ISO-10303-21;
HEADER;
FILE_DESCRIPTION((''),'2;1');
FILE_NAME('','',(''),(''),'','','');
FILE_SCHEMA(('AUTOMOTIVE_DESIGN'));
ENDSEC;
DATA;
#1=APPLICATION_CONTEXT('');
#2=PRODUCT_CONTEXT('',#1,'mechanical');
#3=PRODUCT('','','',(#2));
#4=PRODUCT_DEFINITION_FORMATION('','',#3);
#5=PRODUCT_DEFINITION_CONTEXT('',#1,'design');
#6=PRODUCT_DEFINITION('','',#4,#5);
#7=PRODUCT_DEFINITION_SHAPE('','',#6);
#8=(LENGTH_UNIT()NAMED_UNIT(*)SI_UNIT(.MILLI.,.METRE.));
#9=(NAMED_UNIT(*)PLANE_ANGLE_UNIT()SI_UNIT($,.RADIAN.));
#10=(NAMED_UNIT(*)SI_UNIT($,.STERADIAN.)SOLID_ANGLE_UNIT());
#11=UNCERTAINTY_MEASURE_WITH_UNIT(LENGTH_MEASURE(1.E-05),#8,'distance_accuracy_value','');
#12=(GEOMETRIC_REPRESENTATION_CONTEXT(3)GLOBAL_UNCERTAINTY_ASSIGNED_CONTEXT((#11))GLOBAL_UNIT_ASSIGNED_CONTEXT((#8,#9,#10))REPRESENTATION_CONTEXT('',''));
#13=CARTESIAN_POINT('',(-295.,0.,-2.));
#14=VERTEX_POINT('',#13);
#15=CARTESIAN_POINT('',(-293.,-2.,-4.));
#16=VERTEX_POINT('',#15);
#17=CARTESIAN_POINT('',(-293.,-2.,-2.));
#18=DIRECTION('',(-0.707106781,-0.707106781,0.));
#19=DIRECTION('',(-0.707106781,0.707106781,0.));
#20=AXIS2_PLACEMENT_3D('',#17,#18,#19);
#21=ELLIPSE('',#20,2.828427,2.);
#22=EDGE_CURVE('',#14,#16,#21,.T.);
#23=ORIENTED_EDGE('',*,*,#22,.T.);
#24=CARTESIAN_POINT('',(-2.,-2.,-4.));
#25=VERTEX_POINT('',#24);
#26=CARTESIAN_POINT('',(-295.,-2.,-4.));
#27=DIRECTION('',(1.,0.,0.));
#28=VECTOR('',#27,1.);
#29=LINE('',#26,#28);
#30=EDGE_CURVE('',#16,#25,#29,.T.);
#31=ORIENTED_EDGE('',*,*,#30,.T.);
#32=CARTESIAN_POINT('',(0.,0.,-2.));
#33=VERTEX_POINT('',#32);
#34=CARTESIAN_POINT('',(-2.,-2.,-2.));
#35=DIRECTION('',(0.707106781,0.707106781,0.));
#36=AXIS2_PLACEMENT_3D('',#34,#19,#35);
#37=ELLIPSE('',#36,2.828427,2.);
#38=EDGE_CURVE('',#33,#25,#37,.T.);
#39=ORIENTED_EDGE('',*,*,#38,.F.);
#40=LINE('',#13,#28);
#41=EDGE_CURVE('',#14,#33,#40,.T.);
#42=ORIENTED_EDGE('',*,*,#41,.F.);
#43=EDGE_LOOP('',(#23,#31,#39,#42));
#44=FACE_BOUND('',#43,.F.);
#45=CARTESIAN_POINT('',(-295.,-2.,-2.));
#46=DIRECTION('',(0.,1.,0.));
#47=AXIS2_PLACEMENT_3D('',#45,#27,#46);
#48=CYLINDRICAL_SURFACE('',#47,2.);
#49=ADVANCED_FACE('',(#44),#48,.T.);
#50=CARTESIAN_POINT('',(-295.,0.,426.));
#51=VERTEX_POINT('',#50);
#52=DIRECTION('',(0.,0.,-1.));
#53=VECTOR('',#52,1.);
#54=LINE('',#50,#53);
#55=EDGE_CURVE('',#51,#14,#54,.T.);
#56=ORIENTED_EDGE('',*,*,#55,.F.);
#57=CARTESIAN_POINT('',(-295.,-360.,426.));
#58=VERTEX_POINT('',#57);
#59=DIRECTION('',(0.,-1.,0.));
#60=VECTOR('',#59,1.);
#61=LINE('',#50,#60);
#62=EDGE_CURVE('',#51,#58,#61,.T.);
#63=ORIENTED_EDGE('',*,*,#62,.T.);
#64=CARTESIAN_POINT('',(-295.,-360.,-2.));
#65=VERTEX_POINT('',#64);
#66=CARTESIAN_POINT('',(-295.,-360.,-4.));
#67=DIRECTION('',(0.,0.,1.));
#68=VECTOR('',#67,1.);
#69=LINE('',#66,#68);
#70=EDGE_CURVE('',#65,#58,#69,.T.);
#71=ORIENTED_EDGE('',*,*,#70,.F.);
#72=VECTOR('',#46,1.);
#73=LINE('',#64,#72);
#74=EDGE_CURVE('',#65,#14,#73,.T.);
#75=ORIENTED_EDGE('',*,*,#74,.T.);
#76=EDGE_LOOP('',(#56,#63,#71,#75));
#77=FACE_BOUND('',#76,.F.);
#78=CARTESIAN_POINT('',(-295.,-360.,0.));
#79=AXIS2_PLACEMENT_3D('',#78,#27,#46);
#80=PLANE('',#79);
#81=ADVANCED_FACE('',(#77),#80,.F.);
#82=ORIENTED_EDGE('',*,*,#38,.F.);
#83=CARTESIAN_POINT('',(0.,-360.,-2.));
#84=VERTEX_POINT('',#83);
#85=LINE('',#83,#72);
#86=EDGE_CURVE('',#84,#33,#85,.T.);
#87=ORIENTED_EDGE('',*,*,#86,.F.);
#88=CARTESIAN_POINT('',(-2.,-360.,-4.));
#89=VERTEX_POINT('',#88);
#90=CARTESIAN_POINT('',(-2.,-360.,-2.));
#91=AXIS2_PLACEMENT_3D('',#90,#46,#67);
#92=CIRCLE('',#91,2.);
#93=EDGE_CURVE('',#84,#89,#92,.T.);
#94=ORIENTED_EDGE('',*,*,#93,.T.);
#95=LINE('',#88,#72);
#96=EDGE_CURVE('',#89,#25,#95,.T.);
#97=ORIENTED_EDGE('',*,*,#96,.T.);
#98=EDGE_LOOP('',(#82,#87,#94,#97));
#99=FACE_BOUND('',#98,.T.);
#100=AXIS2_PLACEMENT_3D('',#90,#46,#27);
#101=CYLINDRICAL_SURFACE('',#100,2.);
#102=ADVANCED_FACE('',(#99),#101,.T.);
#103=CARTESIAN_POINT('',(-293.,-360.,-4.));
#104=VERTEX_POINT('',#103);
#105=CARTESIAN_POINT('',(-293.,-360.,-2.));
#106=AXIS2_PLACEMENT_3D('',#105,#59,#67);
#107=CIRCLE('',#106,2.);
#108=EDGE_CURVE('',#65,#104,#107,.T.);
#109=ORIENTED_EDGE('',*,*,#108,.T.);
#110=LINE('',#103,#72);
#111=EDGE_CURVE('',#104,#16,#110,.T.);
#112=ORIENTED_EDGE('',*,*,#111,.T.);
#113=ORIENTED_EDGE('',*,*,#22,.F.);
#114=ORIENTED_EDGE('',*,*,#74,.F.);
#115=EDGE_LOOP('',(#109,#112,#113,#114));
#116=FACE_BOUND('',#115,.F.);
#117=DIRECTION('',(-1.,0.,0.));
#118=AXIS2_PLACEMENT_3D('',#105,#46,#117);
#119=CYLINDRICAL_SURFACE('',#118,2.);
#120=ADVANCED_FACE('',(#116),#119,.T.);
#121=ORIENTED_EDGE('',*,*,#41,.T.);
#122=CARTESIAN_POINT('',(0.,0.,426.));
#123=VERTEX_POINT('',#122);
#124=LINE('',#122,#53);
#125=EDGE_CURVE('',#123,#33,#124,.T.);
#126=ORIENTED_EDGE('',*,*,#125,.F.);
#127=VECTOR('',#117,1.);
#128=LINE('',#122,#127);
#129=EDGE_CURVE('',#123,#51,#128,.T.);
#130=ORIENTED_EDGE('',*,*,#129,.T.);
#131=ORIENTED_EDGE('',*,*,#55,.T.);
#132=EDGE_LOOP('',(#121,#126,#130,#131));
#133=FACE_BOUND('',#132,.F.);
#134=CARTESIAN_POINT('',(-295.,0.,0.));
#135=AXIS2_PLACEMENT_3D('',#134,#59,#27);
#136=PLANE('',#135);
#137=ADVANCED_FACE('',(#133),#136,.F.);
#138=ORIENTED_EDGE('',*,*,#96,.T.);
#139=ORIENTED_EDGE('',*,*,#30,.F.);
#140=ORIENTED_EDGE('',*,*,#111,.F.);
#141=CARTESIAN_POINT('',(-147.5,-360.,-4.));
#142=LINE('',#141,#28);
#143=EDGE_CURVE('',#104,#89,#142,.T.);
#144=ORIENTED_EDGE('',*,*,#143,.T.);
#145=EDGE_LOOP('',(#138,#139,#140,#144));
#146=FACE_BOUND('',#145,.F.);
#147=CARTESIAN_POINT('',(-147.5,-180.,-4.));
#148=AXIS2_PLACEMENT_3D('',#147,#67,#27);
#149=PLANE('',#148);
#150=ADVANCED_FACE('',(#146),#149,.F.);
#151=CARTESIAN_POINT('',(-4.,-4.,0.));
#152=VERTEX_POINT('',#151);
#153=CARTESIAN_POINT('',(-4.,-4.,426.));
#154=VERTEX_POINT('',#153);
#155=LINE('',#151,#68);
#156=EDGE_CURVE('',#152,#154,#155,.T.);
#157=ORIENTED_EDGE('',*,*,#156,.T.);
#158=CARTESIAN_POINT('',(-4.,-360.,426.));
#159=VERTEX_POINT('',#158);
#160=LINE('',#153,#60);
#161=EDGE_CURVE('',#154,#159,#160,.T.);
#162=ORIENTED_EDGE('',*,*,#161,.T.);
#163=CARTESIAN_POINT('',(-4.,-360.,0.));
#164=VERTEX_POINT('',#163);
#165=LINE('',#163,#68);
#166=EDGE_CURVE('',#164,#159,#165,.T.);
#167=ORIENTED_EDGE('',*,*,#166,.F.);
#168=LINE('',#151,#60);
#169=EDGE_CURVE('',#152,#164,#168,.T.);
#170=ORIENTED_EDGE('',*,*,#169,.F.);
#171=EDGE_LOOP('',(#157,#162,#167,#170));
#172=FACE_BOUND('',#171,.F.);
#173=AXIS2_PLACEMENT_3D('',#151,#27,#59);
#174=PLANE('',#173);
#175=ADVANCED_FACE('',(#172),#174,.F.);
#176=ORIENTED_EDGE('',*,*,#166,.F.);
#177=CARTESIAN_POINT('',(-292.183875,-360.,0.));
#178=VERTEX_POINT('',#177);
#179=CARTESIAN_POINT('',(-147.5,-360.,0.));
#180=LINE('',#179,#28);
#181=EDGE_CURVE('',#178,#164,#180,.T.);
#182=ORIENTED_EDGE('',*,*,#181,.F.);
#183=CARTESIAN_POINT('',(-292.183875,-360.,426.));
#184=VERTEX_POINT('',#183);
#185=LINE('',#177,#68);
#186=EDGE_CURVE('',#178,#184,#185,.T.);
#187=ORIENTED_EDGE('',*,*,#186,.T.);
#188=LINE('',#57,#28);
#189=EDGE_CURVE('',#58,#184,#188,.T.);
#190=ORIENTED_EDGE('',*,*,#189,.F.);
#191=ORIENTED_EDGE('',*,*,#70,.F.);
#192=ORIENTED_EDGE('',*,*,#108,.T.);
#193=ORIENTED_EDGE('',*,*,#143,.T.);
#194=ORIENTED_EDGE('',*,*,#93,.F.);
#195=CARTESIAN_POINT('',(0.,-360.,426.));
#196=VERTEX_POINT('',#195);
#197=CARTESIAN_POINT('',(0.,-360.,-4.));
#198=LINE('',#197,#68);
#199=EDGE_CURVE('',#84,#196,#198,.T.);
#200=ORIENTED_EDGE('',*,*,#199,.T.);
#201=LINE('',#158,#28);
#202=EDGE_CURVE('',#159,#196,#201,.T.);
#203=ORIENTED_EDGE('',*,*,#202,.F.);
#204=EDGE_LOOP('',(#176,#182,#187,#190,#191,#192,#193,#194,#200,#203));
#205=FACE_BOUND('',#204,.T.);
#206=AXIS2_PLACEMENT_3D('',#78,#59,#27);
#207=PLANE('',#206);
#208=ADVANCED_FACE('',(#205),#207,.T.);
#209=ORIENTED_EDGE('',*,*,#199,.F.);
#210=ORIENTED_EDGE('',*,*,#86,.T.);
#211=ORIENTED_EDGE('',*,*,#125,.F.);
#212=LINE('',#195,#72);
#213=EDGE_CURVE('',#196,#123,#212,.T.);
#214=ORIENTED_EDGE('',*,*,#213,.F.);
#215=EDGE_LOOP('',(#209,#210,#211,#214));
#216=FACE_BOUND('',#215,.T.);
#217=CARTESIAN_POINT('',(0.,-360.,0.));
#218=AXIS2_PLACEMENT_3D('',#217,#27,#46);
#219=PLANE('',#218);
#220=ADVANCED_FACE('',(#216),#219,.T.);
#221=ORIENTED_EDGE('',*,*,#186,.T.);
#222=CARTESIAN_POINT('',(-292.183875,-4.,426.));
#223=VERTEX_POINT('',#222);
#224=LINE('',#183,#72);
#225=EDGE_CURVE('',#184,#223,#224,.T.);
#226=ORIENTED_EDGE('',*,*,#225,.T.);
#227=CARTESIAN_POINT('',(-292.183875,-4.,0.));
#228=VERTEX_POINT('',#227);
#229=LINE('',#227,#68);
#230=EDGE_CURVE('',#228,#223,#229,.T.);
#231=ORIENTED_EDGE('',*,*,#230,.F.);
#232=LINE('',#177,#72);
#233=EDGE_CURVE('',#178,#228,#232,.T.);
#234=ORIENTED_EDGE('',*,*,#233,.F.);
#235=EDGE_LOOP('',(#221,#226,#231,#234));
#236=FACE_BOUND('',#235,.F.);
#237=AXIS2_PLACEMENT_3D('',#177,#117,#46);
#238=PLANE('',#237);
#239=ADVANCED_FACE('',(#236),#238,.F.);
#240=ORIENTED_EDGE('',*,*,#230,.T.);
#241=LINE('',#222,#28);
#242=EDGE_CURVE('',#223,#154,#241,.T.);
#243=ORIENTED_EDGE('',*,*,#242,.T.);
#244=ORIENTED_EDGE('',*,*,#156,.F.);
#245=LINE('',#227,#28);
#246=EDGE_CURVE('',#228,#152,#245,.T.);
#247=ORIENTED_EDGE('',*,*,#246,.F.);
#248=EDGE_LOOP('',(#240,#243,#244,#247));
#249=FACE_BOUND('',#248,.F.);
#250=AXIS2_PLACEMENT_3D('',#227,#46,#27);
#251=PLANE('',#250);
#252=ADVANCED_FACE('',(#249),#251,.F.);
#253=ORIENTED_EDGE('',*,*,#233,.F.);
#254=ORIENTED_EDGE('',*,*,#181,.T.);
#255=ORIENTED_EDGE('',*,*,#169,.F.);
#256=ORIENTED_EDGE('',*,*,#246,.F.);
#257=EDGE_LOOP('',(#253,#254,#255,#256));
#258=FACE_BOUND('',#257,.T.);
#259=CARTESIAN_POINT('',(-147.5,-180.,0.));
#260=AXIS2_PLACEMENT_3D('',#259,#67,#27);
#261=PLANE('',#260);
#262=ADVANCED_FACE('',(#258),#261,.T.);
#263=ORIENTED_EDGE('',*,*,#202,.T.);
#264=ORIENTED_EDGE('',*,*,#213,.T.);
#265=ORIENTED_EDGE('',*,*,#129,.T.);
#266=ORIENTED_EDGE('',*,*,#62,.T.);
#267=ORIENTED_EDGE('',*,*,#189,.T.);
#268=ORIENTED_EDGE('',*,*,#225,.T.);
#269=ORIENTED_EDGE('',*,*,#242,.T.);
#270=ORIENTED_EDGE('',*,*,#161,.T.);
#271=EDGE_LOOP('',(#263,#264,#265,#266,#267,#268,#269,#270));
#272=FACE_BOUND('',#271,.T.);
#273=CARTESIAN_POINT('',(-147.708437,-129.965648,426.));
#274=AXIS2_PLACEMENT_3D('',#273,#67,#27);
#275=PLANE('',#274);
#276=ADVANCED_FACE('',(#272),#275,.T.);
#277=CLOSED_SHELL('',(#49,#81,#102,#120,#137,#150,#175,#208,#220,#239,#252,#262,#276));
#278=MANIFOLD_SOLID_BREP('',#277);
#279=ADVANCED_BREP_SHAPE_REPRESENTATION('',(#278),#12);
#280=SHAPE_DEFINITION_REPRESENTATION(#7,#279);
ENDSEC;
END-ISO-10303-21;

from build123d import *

# Parameters (mm, degrees)
F1_DEPTH = 426
F2_W     = 295
F2_H     = 360
F3_DEPTH = 4
F4_R     = 2


# Not quite as in the source:
# - a feature names something its author has since deleted; it is built from what else it names


with BuildPart() as f1:
    # F0 (on Top) → F1 (new body)
    with BuildSketch(Plane.XY):
        Polygon((-4, -360), (0, -360), (0, 0), (-295, 0), (-295, -360), (-292.1838745495, -360), (-292.1838745495, -4), (-4, -4), align=None)
    extrude(amount=F1_DEPTH)

    # F2 (on Top) → F3 (join)
    with BuildSketch(Plane.XY):
        with Locations((-147.5, -180)):
            Rectangle(F2_W, F2_H)
    extrude(amount=-F3_DEPTH)

    # F4
    f4_edges = [f1.edges().sort_by_distance(p)[0] for p in [
        (0, -180, -4),
        (-295, -180, -4),
        (-147.5, 0, -4),
    ]]
    fillet(f4_edges, radius=F4_R)


solid = f1.part
